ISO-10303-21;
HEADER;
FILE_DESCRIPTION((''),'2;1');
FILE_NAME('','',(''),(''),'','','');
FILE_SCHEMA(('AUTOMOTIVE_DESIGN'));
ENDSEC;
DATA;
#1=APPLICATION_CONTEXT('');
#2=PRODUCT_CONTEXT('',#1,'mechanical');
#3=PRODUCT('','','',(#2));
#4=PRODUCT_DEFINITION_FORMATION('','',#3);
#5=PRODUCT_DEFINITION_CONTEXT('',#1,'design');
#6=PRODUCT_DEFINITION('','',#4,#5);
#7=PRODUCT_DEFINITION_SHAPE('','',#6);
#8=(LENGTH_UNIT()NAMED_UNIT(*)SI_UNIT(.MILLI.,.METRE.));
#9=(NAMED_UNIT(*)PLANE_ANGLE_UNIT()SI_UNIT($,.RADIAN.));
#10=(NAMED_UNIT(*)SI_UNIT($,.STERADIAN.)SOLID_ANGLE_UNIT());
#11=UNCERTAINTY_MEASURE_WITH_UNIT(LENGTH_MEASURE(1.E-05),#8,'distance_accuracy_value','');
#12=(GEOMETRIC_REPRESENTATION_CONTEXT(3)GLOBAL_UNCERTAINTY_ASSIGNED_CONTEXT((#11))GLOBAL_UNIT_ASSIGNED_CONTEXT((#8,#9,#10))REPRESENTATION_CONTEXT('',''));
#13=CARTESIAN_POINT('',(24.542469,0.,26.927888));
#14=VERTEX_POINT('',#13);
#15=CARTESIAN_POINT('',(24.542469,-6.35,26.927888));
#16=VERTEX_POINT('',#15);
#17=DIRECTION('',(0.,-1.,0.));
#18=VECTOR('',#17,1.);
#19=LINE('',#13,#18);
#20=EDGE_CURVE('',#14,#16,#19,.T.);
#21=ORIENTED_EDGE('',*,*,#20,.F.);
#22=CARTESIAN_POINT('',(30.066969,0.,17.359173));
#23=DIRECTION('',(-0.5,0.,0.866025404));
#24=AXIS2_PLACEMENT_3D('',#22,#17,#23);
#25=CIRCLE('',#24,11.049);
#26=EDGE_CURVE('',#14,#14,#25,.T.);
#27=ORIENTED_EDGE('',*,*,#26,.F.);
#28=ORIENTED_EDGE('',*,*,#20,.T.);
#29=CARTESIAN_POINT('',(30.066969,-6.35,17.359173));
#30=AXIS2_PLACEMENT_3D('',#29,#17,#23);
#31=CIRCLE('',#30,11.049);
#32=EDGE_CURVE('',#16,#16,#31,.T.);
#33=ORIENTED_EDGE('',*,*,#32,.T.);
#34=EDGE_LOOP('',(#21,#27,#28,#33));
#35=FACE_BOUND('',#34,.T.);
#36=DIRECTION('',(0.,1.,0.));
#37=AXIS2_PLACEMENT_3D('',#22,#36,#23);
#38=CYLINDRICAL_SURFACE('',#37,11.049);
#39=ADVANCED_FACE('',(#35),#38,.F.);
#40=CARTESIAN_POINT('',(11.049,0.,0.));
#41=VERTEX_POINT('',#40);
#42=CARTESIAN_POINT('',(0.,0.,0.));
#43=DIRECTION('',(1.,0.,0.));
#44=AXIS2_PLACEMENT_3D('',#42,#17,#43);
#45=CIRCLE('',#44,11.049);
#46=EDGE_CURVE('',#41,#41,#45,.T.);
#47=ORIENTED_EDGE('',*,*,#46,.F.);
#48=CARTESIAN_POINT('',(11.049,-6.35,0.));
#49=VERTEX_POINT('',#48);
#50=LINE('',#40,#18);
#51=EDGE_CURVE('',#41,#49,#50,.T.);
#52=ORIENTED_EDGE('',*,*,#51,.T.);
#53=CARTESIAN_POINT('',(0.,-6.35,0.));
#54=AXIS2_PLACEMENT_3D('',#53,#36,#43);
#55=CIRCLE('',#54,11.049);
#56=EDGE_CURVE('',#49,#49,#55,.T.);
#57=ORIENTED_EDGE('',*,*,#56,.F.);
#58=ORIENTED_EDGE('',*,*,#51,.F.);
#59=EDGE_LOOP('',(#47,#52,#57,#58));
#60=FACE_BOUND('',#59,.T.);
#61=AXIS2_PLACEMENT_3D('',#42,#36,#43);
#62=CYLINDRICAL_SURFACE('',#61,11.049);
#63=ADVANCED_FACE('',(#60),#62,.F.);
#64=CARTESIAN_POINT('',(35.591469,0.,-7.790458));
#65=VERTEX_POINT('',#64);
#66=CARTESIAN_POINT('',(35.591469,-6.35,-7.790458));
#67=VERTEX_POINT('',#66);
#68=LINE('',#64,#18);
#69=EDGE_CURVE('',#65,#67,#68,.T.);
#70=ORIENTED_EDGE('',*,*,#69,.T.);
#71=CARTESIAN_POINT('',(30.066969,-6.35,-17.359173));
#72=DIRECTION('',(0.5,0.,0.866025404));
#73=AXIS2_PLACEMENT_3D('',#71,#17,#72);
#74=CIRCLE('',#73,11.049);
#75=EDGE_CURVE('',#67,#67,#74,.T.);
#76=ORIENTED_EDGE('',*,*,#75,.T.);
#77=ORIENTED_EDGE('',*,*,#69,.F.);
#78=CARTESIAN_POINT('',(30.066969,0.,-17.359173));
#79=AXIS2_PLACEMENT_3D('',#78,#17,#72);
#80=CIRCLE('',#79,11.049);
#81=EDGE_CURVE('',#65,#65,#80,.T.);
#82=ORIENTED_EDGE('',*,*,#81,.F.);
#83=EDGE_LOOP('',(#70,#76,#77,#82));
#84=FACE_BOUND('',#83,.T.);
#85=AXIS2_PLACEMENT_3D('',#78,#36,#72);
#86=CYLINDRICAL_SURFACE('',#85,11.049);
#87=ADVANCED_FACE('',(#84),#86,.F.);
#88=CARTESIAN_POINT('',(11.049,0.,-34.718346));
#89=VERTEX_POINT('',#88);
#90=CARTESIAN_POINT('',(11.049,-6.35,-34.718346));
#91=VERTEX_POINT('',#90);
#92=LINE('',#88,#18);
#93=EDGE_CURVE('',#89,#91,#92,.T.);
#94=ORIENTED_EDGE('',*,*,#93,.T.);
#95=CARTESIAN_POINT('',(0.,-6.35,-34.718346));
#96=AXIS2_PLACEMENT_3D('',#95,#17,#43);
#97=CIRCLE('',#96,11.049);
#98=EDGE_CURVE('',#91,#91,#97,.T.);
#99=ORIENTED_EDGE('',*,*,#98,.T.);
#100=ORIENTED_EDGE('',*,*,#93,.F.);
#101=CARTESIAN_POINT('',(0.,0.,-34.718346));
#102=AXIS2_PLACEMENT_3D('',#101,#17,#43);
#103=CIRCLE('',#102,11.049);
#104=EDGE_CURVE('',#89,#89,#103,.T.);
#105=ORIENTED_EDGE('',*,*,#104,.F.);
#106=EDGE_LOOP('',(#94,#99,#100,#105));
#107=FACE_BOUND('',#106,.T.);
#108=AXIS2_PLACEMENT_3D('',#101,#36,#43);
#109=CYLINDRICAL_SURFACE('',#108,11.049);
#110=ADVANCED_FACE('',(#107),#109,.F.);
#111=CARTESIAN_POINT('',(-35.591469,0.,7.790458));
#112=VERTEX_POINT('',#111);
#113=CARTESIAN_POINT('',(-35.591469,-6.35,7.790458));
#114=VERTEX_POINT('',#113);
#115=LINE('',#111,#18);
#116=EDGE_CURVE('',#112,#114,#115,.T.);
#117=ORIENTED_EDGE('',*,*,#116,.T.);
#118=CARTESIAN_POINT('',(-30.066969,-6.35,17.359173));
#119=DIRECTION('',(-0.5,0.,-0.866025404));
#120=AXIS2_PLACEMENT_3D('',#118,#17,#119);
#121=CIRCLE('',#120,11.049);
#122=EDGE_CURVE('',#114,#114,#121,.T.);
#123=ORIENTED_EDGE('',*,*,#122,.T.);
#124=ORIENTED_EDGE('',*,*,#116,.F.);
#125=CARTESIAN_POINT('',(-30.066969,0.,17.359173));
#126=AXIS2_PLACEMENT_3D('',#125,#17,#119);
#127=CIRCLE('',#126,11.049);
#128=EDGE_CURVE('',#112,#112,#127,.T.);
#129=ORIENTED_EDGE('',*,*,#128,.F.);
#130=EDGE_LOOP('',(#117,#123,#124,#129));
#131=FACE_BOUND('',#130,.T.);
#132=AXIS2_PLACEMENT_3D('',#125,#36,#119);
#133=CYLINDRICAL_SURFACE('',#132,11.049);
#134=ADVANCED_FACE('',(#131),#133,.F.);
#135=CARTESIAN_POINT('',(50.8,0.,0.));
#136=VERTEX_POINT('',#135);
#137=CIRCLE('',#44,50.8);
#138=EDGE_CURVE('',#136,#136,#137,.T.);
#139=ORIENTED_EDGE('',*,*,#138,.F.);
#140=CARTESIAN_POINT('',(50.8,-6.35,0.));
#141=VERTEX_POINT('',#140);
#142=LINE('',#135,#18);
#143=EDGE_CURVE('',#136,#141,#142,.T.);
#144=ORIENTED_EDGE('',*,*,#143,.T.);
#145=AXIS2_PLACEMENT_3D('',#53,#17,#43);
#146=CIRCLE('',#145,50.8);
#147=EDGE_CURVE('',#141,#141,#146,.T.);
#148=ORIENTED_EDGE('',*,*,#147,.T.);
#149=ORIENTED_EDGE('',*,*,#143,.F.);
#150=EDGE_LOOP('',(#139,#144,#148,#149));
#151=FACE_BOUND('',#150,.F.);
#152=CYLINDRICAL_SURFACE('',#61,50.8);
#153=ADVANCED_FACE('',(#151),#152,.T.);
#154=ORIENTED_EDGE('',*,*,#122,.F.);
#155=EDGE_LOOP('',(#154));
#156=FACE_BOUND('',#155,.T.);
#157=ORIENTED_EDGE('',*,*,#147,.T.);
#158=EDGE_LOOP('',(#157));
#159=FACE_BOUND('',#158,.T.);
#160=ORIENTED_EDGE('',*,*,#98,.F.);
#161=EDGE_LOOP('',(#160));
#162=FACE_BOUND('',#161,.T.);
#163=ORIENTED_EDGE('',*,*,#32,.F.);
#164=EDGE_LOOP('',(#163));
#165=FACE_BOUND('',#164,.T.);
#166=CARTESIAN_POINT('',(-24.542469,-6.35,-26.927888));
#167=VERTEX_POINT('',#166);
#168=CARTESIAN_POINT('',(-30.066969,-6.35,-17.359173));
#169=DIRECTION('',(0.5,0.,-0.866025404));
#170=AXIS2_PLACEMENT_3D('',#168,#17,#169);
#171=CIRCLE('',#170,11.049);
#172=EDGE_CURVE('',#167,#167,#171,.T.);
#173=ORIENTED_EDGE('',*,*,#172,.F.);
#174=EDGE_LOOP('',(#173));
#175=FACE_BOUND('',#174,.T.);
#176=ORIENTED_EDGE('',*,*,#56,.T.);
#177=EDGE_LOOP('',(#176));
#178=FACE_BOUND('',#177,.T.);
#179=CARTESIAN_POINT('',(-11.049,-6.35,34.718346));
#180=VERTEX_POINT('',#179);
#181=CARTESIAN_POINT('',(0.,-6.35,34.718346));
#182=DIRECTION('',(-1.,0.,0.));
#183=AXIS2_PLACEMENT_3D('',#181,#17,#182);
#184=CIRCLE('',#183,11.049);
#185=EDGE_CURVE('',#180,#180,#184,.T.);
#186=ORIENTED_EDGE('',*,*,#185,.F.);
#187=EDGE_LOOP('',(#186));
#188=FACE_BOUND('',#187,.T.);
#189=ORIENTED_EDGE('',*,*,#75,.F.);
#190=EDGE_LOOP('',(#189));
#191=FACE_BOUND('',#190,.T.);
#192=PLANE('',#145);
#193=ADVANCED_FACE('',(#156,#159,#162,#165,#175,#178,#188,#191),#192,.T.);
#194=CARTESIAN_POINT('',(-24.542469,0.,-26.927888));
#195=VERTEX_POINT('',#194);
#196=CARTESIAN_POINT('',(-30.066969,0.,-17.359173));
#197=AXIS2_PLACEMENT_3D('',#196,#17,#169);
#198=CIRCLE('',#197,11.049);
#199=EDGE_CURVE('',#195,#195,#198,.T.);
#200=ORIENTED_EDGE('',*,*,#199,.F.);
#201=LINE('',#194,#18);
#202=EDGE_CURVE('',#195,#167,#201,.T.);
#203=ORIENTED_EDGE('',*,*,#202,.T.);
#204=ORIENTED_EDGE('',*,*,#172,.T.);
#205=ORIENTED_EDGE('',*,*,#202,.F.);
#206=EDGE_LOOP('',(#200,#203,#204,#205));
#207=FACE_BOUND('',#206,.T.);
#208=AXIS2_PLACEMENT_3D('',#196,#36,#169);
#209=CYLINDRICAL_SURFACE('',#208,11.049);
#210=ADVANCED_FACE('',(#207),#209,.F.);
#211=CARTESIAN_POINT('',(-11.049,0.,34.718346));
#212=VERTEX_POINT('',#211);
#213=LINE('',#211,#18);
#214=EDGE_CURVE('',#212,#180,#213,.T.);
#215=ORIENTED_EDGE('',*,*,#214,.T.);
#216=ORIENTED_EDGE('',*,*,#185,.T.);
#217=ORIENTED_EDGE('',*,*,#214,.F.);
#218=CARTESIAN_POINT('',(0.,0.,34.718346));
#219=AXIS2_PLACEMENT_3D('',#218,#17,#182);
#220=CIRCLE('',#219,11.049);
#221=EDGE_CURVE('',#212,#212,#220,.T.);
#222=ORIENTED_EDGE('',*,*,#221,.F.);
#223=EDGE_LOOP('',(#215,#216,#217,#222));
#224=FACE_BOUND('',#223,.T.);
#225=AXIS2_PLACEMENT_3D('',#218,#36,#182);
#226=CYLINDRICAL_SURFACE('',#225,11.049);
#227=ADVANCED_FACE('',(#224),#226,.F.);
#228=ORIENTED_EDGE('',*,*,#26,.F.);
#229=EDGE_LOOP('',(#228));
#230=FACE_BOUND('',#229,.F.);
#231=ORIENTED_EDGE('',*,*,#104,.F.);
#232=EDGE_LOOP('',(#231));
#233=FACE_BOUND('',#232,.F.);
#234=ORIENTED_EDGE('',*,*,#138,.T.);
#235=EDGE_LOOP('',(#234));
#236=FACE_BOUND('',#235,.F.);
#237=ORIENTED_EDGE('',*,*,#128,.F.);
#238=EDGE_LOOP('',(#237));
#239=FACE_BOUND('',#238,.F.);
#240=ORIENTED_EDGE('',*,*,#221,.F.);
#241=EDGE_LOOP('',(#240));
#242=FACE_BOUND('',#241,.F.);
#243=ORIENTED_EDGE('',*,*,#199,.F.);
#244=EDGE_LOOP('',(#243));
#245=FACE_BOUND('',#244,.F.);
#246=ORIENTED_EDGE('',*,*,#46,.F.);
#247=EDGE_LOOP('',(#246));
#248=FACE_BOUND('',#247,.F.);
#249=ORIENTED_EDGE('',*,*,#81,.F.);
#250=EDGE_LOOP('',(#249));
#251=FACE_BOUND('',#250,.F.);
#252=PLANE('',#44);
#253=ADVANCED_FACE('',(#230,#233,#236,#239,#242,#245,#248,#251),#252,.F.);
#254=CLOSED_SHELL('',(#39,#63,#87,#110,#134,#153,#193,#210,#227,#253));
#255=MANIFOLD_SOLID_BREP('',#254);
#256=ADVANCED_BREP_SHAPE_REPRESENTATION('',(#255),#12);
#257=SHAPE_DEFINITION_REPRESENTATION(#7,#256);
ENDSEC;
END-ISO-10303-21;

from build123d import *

# Parameters (mm, degrees)
F0_R            = 50.8
F2_DEPTH        = 6.35
F1_R            = 11.049
F3_DEPTH        = 10.414
F5_R            = 11.049
F6_DEPTH        = 6.35
F6_COPIES_COUNT = 6


# Not quite as in the source:
# - a pattern or mirror of a feature is missing from the dataset's text; its kind, count and spacing are read off the source's solid
# - a feature names something its author has since deleted; it is built from what else it names


with BuildPart() as f2:
    # F0 (on Front) → F2 (new body)
    with BuildSketch(Plane.XZ):
        Circle(F0_R)
    extrude(amount=F2_DEPTH)

    # F1 (on Front) → F3 (cut)
    with BuildSketch(Plane.XZ):
        Circle(F1_R)
    extrude(amount=F3_DEPTH, mode=Mode.SUBTRACT)

    # F5 (on Front) → F6 (cut)
    with BuildSketch(Plane.XZ):
        with Locations((0, -34.7183458507)):
            Circle(F5_R)
    f6 = extrude(amount=F6_DEPTH, mode=Mode.SUBTRACT)

    # F6_copies: F6 ×6 about axis
    f6_copies_axis = Axis((0, 0, 0), (0, 1, 0))
    for i in range(1, F6_COPIES_COUNT):
        add(f6.rotate(f6_copies_axis, i * 360 / F6_COPIES_COUNT), mode=Mode.SUBTRACT)


solid = f2.part
